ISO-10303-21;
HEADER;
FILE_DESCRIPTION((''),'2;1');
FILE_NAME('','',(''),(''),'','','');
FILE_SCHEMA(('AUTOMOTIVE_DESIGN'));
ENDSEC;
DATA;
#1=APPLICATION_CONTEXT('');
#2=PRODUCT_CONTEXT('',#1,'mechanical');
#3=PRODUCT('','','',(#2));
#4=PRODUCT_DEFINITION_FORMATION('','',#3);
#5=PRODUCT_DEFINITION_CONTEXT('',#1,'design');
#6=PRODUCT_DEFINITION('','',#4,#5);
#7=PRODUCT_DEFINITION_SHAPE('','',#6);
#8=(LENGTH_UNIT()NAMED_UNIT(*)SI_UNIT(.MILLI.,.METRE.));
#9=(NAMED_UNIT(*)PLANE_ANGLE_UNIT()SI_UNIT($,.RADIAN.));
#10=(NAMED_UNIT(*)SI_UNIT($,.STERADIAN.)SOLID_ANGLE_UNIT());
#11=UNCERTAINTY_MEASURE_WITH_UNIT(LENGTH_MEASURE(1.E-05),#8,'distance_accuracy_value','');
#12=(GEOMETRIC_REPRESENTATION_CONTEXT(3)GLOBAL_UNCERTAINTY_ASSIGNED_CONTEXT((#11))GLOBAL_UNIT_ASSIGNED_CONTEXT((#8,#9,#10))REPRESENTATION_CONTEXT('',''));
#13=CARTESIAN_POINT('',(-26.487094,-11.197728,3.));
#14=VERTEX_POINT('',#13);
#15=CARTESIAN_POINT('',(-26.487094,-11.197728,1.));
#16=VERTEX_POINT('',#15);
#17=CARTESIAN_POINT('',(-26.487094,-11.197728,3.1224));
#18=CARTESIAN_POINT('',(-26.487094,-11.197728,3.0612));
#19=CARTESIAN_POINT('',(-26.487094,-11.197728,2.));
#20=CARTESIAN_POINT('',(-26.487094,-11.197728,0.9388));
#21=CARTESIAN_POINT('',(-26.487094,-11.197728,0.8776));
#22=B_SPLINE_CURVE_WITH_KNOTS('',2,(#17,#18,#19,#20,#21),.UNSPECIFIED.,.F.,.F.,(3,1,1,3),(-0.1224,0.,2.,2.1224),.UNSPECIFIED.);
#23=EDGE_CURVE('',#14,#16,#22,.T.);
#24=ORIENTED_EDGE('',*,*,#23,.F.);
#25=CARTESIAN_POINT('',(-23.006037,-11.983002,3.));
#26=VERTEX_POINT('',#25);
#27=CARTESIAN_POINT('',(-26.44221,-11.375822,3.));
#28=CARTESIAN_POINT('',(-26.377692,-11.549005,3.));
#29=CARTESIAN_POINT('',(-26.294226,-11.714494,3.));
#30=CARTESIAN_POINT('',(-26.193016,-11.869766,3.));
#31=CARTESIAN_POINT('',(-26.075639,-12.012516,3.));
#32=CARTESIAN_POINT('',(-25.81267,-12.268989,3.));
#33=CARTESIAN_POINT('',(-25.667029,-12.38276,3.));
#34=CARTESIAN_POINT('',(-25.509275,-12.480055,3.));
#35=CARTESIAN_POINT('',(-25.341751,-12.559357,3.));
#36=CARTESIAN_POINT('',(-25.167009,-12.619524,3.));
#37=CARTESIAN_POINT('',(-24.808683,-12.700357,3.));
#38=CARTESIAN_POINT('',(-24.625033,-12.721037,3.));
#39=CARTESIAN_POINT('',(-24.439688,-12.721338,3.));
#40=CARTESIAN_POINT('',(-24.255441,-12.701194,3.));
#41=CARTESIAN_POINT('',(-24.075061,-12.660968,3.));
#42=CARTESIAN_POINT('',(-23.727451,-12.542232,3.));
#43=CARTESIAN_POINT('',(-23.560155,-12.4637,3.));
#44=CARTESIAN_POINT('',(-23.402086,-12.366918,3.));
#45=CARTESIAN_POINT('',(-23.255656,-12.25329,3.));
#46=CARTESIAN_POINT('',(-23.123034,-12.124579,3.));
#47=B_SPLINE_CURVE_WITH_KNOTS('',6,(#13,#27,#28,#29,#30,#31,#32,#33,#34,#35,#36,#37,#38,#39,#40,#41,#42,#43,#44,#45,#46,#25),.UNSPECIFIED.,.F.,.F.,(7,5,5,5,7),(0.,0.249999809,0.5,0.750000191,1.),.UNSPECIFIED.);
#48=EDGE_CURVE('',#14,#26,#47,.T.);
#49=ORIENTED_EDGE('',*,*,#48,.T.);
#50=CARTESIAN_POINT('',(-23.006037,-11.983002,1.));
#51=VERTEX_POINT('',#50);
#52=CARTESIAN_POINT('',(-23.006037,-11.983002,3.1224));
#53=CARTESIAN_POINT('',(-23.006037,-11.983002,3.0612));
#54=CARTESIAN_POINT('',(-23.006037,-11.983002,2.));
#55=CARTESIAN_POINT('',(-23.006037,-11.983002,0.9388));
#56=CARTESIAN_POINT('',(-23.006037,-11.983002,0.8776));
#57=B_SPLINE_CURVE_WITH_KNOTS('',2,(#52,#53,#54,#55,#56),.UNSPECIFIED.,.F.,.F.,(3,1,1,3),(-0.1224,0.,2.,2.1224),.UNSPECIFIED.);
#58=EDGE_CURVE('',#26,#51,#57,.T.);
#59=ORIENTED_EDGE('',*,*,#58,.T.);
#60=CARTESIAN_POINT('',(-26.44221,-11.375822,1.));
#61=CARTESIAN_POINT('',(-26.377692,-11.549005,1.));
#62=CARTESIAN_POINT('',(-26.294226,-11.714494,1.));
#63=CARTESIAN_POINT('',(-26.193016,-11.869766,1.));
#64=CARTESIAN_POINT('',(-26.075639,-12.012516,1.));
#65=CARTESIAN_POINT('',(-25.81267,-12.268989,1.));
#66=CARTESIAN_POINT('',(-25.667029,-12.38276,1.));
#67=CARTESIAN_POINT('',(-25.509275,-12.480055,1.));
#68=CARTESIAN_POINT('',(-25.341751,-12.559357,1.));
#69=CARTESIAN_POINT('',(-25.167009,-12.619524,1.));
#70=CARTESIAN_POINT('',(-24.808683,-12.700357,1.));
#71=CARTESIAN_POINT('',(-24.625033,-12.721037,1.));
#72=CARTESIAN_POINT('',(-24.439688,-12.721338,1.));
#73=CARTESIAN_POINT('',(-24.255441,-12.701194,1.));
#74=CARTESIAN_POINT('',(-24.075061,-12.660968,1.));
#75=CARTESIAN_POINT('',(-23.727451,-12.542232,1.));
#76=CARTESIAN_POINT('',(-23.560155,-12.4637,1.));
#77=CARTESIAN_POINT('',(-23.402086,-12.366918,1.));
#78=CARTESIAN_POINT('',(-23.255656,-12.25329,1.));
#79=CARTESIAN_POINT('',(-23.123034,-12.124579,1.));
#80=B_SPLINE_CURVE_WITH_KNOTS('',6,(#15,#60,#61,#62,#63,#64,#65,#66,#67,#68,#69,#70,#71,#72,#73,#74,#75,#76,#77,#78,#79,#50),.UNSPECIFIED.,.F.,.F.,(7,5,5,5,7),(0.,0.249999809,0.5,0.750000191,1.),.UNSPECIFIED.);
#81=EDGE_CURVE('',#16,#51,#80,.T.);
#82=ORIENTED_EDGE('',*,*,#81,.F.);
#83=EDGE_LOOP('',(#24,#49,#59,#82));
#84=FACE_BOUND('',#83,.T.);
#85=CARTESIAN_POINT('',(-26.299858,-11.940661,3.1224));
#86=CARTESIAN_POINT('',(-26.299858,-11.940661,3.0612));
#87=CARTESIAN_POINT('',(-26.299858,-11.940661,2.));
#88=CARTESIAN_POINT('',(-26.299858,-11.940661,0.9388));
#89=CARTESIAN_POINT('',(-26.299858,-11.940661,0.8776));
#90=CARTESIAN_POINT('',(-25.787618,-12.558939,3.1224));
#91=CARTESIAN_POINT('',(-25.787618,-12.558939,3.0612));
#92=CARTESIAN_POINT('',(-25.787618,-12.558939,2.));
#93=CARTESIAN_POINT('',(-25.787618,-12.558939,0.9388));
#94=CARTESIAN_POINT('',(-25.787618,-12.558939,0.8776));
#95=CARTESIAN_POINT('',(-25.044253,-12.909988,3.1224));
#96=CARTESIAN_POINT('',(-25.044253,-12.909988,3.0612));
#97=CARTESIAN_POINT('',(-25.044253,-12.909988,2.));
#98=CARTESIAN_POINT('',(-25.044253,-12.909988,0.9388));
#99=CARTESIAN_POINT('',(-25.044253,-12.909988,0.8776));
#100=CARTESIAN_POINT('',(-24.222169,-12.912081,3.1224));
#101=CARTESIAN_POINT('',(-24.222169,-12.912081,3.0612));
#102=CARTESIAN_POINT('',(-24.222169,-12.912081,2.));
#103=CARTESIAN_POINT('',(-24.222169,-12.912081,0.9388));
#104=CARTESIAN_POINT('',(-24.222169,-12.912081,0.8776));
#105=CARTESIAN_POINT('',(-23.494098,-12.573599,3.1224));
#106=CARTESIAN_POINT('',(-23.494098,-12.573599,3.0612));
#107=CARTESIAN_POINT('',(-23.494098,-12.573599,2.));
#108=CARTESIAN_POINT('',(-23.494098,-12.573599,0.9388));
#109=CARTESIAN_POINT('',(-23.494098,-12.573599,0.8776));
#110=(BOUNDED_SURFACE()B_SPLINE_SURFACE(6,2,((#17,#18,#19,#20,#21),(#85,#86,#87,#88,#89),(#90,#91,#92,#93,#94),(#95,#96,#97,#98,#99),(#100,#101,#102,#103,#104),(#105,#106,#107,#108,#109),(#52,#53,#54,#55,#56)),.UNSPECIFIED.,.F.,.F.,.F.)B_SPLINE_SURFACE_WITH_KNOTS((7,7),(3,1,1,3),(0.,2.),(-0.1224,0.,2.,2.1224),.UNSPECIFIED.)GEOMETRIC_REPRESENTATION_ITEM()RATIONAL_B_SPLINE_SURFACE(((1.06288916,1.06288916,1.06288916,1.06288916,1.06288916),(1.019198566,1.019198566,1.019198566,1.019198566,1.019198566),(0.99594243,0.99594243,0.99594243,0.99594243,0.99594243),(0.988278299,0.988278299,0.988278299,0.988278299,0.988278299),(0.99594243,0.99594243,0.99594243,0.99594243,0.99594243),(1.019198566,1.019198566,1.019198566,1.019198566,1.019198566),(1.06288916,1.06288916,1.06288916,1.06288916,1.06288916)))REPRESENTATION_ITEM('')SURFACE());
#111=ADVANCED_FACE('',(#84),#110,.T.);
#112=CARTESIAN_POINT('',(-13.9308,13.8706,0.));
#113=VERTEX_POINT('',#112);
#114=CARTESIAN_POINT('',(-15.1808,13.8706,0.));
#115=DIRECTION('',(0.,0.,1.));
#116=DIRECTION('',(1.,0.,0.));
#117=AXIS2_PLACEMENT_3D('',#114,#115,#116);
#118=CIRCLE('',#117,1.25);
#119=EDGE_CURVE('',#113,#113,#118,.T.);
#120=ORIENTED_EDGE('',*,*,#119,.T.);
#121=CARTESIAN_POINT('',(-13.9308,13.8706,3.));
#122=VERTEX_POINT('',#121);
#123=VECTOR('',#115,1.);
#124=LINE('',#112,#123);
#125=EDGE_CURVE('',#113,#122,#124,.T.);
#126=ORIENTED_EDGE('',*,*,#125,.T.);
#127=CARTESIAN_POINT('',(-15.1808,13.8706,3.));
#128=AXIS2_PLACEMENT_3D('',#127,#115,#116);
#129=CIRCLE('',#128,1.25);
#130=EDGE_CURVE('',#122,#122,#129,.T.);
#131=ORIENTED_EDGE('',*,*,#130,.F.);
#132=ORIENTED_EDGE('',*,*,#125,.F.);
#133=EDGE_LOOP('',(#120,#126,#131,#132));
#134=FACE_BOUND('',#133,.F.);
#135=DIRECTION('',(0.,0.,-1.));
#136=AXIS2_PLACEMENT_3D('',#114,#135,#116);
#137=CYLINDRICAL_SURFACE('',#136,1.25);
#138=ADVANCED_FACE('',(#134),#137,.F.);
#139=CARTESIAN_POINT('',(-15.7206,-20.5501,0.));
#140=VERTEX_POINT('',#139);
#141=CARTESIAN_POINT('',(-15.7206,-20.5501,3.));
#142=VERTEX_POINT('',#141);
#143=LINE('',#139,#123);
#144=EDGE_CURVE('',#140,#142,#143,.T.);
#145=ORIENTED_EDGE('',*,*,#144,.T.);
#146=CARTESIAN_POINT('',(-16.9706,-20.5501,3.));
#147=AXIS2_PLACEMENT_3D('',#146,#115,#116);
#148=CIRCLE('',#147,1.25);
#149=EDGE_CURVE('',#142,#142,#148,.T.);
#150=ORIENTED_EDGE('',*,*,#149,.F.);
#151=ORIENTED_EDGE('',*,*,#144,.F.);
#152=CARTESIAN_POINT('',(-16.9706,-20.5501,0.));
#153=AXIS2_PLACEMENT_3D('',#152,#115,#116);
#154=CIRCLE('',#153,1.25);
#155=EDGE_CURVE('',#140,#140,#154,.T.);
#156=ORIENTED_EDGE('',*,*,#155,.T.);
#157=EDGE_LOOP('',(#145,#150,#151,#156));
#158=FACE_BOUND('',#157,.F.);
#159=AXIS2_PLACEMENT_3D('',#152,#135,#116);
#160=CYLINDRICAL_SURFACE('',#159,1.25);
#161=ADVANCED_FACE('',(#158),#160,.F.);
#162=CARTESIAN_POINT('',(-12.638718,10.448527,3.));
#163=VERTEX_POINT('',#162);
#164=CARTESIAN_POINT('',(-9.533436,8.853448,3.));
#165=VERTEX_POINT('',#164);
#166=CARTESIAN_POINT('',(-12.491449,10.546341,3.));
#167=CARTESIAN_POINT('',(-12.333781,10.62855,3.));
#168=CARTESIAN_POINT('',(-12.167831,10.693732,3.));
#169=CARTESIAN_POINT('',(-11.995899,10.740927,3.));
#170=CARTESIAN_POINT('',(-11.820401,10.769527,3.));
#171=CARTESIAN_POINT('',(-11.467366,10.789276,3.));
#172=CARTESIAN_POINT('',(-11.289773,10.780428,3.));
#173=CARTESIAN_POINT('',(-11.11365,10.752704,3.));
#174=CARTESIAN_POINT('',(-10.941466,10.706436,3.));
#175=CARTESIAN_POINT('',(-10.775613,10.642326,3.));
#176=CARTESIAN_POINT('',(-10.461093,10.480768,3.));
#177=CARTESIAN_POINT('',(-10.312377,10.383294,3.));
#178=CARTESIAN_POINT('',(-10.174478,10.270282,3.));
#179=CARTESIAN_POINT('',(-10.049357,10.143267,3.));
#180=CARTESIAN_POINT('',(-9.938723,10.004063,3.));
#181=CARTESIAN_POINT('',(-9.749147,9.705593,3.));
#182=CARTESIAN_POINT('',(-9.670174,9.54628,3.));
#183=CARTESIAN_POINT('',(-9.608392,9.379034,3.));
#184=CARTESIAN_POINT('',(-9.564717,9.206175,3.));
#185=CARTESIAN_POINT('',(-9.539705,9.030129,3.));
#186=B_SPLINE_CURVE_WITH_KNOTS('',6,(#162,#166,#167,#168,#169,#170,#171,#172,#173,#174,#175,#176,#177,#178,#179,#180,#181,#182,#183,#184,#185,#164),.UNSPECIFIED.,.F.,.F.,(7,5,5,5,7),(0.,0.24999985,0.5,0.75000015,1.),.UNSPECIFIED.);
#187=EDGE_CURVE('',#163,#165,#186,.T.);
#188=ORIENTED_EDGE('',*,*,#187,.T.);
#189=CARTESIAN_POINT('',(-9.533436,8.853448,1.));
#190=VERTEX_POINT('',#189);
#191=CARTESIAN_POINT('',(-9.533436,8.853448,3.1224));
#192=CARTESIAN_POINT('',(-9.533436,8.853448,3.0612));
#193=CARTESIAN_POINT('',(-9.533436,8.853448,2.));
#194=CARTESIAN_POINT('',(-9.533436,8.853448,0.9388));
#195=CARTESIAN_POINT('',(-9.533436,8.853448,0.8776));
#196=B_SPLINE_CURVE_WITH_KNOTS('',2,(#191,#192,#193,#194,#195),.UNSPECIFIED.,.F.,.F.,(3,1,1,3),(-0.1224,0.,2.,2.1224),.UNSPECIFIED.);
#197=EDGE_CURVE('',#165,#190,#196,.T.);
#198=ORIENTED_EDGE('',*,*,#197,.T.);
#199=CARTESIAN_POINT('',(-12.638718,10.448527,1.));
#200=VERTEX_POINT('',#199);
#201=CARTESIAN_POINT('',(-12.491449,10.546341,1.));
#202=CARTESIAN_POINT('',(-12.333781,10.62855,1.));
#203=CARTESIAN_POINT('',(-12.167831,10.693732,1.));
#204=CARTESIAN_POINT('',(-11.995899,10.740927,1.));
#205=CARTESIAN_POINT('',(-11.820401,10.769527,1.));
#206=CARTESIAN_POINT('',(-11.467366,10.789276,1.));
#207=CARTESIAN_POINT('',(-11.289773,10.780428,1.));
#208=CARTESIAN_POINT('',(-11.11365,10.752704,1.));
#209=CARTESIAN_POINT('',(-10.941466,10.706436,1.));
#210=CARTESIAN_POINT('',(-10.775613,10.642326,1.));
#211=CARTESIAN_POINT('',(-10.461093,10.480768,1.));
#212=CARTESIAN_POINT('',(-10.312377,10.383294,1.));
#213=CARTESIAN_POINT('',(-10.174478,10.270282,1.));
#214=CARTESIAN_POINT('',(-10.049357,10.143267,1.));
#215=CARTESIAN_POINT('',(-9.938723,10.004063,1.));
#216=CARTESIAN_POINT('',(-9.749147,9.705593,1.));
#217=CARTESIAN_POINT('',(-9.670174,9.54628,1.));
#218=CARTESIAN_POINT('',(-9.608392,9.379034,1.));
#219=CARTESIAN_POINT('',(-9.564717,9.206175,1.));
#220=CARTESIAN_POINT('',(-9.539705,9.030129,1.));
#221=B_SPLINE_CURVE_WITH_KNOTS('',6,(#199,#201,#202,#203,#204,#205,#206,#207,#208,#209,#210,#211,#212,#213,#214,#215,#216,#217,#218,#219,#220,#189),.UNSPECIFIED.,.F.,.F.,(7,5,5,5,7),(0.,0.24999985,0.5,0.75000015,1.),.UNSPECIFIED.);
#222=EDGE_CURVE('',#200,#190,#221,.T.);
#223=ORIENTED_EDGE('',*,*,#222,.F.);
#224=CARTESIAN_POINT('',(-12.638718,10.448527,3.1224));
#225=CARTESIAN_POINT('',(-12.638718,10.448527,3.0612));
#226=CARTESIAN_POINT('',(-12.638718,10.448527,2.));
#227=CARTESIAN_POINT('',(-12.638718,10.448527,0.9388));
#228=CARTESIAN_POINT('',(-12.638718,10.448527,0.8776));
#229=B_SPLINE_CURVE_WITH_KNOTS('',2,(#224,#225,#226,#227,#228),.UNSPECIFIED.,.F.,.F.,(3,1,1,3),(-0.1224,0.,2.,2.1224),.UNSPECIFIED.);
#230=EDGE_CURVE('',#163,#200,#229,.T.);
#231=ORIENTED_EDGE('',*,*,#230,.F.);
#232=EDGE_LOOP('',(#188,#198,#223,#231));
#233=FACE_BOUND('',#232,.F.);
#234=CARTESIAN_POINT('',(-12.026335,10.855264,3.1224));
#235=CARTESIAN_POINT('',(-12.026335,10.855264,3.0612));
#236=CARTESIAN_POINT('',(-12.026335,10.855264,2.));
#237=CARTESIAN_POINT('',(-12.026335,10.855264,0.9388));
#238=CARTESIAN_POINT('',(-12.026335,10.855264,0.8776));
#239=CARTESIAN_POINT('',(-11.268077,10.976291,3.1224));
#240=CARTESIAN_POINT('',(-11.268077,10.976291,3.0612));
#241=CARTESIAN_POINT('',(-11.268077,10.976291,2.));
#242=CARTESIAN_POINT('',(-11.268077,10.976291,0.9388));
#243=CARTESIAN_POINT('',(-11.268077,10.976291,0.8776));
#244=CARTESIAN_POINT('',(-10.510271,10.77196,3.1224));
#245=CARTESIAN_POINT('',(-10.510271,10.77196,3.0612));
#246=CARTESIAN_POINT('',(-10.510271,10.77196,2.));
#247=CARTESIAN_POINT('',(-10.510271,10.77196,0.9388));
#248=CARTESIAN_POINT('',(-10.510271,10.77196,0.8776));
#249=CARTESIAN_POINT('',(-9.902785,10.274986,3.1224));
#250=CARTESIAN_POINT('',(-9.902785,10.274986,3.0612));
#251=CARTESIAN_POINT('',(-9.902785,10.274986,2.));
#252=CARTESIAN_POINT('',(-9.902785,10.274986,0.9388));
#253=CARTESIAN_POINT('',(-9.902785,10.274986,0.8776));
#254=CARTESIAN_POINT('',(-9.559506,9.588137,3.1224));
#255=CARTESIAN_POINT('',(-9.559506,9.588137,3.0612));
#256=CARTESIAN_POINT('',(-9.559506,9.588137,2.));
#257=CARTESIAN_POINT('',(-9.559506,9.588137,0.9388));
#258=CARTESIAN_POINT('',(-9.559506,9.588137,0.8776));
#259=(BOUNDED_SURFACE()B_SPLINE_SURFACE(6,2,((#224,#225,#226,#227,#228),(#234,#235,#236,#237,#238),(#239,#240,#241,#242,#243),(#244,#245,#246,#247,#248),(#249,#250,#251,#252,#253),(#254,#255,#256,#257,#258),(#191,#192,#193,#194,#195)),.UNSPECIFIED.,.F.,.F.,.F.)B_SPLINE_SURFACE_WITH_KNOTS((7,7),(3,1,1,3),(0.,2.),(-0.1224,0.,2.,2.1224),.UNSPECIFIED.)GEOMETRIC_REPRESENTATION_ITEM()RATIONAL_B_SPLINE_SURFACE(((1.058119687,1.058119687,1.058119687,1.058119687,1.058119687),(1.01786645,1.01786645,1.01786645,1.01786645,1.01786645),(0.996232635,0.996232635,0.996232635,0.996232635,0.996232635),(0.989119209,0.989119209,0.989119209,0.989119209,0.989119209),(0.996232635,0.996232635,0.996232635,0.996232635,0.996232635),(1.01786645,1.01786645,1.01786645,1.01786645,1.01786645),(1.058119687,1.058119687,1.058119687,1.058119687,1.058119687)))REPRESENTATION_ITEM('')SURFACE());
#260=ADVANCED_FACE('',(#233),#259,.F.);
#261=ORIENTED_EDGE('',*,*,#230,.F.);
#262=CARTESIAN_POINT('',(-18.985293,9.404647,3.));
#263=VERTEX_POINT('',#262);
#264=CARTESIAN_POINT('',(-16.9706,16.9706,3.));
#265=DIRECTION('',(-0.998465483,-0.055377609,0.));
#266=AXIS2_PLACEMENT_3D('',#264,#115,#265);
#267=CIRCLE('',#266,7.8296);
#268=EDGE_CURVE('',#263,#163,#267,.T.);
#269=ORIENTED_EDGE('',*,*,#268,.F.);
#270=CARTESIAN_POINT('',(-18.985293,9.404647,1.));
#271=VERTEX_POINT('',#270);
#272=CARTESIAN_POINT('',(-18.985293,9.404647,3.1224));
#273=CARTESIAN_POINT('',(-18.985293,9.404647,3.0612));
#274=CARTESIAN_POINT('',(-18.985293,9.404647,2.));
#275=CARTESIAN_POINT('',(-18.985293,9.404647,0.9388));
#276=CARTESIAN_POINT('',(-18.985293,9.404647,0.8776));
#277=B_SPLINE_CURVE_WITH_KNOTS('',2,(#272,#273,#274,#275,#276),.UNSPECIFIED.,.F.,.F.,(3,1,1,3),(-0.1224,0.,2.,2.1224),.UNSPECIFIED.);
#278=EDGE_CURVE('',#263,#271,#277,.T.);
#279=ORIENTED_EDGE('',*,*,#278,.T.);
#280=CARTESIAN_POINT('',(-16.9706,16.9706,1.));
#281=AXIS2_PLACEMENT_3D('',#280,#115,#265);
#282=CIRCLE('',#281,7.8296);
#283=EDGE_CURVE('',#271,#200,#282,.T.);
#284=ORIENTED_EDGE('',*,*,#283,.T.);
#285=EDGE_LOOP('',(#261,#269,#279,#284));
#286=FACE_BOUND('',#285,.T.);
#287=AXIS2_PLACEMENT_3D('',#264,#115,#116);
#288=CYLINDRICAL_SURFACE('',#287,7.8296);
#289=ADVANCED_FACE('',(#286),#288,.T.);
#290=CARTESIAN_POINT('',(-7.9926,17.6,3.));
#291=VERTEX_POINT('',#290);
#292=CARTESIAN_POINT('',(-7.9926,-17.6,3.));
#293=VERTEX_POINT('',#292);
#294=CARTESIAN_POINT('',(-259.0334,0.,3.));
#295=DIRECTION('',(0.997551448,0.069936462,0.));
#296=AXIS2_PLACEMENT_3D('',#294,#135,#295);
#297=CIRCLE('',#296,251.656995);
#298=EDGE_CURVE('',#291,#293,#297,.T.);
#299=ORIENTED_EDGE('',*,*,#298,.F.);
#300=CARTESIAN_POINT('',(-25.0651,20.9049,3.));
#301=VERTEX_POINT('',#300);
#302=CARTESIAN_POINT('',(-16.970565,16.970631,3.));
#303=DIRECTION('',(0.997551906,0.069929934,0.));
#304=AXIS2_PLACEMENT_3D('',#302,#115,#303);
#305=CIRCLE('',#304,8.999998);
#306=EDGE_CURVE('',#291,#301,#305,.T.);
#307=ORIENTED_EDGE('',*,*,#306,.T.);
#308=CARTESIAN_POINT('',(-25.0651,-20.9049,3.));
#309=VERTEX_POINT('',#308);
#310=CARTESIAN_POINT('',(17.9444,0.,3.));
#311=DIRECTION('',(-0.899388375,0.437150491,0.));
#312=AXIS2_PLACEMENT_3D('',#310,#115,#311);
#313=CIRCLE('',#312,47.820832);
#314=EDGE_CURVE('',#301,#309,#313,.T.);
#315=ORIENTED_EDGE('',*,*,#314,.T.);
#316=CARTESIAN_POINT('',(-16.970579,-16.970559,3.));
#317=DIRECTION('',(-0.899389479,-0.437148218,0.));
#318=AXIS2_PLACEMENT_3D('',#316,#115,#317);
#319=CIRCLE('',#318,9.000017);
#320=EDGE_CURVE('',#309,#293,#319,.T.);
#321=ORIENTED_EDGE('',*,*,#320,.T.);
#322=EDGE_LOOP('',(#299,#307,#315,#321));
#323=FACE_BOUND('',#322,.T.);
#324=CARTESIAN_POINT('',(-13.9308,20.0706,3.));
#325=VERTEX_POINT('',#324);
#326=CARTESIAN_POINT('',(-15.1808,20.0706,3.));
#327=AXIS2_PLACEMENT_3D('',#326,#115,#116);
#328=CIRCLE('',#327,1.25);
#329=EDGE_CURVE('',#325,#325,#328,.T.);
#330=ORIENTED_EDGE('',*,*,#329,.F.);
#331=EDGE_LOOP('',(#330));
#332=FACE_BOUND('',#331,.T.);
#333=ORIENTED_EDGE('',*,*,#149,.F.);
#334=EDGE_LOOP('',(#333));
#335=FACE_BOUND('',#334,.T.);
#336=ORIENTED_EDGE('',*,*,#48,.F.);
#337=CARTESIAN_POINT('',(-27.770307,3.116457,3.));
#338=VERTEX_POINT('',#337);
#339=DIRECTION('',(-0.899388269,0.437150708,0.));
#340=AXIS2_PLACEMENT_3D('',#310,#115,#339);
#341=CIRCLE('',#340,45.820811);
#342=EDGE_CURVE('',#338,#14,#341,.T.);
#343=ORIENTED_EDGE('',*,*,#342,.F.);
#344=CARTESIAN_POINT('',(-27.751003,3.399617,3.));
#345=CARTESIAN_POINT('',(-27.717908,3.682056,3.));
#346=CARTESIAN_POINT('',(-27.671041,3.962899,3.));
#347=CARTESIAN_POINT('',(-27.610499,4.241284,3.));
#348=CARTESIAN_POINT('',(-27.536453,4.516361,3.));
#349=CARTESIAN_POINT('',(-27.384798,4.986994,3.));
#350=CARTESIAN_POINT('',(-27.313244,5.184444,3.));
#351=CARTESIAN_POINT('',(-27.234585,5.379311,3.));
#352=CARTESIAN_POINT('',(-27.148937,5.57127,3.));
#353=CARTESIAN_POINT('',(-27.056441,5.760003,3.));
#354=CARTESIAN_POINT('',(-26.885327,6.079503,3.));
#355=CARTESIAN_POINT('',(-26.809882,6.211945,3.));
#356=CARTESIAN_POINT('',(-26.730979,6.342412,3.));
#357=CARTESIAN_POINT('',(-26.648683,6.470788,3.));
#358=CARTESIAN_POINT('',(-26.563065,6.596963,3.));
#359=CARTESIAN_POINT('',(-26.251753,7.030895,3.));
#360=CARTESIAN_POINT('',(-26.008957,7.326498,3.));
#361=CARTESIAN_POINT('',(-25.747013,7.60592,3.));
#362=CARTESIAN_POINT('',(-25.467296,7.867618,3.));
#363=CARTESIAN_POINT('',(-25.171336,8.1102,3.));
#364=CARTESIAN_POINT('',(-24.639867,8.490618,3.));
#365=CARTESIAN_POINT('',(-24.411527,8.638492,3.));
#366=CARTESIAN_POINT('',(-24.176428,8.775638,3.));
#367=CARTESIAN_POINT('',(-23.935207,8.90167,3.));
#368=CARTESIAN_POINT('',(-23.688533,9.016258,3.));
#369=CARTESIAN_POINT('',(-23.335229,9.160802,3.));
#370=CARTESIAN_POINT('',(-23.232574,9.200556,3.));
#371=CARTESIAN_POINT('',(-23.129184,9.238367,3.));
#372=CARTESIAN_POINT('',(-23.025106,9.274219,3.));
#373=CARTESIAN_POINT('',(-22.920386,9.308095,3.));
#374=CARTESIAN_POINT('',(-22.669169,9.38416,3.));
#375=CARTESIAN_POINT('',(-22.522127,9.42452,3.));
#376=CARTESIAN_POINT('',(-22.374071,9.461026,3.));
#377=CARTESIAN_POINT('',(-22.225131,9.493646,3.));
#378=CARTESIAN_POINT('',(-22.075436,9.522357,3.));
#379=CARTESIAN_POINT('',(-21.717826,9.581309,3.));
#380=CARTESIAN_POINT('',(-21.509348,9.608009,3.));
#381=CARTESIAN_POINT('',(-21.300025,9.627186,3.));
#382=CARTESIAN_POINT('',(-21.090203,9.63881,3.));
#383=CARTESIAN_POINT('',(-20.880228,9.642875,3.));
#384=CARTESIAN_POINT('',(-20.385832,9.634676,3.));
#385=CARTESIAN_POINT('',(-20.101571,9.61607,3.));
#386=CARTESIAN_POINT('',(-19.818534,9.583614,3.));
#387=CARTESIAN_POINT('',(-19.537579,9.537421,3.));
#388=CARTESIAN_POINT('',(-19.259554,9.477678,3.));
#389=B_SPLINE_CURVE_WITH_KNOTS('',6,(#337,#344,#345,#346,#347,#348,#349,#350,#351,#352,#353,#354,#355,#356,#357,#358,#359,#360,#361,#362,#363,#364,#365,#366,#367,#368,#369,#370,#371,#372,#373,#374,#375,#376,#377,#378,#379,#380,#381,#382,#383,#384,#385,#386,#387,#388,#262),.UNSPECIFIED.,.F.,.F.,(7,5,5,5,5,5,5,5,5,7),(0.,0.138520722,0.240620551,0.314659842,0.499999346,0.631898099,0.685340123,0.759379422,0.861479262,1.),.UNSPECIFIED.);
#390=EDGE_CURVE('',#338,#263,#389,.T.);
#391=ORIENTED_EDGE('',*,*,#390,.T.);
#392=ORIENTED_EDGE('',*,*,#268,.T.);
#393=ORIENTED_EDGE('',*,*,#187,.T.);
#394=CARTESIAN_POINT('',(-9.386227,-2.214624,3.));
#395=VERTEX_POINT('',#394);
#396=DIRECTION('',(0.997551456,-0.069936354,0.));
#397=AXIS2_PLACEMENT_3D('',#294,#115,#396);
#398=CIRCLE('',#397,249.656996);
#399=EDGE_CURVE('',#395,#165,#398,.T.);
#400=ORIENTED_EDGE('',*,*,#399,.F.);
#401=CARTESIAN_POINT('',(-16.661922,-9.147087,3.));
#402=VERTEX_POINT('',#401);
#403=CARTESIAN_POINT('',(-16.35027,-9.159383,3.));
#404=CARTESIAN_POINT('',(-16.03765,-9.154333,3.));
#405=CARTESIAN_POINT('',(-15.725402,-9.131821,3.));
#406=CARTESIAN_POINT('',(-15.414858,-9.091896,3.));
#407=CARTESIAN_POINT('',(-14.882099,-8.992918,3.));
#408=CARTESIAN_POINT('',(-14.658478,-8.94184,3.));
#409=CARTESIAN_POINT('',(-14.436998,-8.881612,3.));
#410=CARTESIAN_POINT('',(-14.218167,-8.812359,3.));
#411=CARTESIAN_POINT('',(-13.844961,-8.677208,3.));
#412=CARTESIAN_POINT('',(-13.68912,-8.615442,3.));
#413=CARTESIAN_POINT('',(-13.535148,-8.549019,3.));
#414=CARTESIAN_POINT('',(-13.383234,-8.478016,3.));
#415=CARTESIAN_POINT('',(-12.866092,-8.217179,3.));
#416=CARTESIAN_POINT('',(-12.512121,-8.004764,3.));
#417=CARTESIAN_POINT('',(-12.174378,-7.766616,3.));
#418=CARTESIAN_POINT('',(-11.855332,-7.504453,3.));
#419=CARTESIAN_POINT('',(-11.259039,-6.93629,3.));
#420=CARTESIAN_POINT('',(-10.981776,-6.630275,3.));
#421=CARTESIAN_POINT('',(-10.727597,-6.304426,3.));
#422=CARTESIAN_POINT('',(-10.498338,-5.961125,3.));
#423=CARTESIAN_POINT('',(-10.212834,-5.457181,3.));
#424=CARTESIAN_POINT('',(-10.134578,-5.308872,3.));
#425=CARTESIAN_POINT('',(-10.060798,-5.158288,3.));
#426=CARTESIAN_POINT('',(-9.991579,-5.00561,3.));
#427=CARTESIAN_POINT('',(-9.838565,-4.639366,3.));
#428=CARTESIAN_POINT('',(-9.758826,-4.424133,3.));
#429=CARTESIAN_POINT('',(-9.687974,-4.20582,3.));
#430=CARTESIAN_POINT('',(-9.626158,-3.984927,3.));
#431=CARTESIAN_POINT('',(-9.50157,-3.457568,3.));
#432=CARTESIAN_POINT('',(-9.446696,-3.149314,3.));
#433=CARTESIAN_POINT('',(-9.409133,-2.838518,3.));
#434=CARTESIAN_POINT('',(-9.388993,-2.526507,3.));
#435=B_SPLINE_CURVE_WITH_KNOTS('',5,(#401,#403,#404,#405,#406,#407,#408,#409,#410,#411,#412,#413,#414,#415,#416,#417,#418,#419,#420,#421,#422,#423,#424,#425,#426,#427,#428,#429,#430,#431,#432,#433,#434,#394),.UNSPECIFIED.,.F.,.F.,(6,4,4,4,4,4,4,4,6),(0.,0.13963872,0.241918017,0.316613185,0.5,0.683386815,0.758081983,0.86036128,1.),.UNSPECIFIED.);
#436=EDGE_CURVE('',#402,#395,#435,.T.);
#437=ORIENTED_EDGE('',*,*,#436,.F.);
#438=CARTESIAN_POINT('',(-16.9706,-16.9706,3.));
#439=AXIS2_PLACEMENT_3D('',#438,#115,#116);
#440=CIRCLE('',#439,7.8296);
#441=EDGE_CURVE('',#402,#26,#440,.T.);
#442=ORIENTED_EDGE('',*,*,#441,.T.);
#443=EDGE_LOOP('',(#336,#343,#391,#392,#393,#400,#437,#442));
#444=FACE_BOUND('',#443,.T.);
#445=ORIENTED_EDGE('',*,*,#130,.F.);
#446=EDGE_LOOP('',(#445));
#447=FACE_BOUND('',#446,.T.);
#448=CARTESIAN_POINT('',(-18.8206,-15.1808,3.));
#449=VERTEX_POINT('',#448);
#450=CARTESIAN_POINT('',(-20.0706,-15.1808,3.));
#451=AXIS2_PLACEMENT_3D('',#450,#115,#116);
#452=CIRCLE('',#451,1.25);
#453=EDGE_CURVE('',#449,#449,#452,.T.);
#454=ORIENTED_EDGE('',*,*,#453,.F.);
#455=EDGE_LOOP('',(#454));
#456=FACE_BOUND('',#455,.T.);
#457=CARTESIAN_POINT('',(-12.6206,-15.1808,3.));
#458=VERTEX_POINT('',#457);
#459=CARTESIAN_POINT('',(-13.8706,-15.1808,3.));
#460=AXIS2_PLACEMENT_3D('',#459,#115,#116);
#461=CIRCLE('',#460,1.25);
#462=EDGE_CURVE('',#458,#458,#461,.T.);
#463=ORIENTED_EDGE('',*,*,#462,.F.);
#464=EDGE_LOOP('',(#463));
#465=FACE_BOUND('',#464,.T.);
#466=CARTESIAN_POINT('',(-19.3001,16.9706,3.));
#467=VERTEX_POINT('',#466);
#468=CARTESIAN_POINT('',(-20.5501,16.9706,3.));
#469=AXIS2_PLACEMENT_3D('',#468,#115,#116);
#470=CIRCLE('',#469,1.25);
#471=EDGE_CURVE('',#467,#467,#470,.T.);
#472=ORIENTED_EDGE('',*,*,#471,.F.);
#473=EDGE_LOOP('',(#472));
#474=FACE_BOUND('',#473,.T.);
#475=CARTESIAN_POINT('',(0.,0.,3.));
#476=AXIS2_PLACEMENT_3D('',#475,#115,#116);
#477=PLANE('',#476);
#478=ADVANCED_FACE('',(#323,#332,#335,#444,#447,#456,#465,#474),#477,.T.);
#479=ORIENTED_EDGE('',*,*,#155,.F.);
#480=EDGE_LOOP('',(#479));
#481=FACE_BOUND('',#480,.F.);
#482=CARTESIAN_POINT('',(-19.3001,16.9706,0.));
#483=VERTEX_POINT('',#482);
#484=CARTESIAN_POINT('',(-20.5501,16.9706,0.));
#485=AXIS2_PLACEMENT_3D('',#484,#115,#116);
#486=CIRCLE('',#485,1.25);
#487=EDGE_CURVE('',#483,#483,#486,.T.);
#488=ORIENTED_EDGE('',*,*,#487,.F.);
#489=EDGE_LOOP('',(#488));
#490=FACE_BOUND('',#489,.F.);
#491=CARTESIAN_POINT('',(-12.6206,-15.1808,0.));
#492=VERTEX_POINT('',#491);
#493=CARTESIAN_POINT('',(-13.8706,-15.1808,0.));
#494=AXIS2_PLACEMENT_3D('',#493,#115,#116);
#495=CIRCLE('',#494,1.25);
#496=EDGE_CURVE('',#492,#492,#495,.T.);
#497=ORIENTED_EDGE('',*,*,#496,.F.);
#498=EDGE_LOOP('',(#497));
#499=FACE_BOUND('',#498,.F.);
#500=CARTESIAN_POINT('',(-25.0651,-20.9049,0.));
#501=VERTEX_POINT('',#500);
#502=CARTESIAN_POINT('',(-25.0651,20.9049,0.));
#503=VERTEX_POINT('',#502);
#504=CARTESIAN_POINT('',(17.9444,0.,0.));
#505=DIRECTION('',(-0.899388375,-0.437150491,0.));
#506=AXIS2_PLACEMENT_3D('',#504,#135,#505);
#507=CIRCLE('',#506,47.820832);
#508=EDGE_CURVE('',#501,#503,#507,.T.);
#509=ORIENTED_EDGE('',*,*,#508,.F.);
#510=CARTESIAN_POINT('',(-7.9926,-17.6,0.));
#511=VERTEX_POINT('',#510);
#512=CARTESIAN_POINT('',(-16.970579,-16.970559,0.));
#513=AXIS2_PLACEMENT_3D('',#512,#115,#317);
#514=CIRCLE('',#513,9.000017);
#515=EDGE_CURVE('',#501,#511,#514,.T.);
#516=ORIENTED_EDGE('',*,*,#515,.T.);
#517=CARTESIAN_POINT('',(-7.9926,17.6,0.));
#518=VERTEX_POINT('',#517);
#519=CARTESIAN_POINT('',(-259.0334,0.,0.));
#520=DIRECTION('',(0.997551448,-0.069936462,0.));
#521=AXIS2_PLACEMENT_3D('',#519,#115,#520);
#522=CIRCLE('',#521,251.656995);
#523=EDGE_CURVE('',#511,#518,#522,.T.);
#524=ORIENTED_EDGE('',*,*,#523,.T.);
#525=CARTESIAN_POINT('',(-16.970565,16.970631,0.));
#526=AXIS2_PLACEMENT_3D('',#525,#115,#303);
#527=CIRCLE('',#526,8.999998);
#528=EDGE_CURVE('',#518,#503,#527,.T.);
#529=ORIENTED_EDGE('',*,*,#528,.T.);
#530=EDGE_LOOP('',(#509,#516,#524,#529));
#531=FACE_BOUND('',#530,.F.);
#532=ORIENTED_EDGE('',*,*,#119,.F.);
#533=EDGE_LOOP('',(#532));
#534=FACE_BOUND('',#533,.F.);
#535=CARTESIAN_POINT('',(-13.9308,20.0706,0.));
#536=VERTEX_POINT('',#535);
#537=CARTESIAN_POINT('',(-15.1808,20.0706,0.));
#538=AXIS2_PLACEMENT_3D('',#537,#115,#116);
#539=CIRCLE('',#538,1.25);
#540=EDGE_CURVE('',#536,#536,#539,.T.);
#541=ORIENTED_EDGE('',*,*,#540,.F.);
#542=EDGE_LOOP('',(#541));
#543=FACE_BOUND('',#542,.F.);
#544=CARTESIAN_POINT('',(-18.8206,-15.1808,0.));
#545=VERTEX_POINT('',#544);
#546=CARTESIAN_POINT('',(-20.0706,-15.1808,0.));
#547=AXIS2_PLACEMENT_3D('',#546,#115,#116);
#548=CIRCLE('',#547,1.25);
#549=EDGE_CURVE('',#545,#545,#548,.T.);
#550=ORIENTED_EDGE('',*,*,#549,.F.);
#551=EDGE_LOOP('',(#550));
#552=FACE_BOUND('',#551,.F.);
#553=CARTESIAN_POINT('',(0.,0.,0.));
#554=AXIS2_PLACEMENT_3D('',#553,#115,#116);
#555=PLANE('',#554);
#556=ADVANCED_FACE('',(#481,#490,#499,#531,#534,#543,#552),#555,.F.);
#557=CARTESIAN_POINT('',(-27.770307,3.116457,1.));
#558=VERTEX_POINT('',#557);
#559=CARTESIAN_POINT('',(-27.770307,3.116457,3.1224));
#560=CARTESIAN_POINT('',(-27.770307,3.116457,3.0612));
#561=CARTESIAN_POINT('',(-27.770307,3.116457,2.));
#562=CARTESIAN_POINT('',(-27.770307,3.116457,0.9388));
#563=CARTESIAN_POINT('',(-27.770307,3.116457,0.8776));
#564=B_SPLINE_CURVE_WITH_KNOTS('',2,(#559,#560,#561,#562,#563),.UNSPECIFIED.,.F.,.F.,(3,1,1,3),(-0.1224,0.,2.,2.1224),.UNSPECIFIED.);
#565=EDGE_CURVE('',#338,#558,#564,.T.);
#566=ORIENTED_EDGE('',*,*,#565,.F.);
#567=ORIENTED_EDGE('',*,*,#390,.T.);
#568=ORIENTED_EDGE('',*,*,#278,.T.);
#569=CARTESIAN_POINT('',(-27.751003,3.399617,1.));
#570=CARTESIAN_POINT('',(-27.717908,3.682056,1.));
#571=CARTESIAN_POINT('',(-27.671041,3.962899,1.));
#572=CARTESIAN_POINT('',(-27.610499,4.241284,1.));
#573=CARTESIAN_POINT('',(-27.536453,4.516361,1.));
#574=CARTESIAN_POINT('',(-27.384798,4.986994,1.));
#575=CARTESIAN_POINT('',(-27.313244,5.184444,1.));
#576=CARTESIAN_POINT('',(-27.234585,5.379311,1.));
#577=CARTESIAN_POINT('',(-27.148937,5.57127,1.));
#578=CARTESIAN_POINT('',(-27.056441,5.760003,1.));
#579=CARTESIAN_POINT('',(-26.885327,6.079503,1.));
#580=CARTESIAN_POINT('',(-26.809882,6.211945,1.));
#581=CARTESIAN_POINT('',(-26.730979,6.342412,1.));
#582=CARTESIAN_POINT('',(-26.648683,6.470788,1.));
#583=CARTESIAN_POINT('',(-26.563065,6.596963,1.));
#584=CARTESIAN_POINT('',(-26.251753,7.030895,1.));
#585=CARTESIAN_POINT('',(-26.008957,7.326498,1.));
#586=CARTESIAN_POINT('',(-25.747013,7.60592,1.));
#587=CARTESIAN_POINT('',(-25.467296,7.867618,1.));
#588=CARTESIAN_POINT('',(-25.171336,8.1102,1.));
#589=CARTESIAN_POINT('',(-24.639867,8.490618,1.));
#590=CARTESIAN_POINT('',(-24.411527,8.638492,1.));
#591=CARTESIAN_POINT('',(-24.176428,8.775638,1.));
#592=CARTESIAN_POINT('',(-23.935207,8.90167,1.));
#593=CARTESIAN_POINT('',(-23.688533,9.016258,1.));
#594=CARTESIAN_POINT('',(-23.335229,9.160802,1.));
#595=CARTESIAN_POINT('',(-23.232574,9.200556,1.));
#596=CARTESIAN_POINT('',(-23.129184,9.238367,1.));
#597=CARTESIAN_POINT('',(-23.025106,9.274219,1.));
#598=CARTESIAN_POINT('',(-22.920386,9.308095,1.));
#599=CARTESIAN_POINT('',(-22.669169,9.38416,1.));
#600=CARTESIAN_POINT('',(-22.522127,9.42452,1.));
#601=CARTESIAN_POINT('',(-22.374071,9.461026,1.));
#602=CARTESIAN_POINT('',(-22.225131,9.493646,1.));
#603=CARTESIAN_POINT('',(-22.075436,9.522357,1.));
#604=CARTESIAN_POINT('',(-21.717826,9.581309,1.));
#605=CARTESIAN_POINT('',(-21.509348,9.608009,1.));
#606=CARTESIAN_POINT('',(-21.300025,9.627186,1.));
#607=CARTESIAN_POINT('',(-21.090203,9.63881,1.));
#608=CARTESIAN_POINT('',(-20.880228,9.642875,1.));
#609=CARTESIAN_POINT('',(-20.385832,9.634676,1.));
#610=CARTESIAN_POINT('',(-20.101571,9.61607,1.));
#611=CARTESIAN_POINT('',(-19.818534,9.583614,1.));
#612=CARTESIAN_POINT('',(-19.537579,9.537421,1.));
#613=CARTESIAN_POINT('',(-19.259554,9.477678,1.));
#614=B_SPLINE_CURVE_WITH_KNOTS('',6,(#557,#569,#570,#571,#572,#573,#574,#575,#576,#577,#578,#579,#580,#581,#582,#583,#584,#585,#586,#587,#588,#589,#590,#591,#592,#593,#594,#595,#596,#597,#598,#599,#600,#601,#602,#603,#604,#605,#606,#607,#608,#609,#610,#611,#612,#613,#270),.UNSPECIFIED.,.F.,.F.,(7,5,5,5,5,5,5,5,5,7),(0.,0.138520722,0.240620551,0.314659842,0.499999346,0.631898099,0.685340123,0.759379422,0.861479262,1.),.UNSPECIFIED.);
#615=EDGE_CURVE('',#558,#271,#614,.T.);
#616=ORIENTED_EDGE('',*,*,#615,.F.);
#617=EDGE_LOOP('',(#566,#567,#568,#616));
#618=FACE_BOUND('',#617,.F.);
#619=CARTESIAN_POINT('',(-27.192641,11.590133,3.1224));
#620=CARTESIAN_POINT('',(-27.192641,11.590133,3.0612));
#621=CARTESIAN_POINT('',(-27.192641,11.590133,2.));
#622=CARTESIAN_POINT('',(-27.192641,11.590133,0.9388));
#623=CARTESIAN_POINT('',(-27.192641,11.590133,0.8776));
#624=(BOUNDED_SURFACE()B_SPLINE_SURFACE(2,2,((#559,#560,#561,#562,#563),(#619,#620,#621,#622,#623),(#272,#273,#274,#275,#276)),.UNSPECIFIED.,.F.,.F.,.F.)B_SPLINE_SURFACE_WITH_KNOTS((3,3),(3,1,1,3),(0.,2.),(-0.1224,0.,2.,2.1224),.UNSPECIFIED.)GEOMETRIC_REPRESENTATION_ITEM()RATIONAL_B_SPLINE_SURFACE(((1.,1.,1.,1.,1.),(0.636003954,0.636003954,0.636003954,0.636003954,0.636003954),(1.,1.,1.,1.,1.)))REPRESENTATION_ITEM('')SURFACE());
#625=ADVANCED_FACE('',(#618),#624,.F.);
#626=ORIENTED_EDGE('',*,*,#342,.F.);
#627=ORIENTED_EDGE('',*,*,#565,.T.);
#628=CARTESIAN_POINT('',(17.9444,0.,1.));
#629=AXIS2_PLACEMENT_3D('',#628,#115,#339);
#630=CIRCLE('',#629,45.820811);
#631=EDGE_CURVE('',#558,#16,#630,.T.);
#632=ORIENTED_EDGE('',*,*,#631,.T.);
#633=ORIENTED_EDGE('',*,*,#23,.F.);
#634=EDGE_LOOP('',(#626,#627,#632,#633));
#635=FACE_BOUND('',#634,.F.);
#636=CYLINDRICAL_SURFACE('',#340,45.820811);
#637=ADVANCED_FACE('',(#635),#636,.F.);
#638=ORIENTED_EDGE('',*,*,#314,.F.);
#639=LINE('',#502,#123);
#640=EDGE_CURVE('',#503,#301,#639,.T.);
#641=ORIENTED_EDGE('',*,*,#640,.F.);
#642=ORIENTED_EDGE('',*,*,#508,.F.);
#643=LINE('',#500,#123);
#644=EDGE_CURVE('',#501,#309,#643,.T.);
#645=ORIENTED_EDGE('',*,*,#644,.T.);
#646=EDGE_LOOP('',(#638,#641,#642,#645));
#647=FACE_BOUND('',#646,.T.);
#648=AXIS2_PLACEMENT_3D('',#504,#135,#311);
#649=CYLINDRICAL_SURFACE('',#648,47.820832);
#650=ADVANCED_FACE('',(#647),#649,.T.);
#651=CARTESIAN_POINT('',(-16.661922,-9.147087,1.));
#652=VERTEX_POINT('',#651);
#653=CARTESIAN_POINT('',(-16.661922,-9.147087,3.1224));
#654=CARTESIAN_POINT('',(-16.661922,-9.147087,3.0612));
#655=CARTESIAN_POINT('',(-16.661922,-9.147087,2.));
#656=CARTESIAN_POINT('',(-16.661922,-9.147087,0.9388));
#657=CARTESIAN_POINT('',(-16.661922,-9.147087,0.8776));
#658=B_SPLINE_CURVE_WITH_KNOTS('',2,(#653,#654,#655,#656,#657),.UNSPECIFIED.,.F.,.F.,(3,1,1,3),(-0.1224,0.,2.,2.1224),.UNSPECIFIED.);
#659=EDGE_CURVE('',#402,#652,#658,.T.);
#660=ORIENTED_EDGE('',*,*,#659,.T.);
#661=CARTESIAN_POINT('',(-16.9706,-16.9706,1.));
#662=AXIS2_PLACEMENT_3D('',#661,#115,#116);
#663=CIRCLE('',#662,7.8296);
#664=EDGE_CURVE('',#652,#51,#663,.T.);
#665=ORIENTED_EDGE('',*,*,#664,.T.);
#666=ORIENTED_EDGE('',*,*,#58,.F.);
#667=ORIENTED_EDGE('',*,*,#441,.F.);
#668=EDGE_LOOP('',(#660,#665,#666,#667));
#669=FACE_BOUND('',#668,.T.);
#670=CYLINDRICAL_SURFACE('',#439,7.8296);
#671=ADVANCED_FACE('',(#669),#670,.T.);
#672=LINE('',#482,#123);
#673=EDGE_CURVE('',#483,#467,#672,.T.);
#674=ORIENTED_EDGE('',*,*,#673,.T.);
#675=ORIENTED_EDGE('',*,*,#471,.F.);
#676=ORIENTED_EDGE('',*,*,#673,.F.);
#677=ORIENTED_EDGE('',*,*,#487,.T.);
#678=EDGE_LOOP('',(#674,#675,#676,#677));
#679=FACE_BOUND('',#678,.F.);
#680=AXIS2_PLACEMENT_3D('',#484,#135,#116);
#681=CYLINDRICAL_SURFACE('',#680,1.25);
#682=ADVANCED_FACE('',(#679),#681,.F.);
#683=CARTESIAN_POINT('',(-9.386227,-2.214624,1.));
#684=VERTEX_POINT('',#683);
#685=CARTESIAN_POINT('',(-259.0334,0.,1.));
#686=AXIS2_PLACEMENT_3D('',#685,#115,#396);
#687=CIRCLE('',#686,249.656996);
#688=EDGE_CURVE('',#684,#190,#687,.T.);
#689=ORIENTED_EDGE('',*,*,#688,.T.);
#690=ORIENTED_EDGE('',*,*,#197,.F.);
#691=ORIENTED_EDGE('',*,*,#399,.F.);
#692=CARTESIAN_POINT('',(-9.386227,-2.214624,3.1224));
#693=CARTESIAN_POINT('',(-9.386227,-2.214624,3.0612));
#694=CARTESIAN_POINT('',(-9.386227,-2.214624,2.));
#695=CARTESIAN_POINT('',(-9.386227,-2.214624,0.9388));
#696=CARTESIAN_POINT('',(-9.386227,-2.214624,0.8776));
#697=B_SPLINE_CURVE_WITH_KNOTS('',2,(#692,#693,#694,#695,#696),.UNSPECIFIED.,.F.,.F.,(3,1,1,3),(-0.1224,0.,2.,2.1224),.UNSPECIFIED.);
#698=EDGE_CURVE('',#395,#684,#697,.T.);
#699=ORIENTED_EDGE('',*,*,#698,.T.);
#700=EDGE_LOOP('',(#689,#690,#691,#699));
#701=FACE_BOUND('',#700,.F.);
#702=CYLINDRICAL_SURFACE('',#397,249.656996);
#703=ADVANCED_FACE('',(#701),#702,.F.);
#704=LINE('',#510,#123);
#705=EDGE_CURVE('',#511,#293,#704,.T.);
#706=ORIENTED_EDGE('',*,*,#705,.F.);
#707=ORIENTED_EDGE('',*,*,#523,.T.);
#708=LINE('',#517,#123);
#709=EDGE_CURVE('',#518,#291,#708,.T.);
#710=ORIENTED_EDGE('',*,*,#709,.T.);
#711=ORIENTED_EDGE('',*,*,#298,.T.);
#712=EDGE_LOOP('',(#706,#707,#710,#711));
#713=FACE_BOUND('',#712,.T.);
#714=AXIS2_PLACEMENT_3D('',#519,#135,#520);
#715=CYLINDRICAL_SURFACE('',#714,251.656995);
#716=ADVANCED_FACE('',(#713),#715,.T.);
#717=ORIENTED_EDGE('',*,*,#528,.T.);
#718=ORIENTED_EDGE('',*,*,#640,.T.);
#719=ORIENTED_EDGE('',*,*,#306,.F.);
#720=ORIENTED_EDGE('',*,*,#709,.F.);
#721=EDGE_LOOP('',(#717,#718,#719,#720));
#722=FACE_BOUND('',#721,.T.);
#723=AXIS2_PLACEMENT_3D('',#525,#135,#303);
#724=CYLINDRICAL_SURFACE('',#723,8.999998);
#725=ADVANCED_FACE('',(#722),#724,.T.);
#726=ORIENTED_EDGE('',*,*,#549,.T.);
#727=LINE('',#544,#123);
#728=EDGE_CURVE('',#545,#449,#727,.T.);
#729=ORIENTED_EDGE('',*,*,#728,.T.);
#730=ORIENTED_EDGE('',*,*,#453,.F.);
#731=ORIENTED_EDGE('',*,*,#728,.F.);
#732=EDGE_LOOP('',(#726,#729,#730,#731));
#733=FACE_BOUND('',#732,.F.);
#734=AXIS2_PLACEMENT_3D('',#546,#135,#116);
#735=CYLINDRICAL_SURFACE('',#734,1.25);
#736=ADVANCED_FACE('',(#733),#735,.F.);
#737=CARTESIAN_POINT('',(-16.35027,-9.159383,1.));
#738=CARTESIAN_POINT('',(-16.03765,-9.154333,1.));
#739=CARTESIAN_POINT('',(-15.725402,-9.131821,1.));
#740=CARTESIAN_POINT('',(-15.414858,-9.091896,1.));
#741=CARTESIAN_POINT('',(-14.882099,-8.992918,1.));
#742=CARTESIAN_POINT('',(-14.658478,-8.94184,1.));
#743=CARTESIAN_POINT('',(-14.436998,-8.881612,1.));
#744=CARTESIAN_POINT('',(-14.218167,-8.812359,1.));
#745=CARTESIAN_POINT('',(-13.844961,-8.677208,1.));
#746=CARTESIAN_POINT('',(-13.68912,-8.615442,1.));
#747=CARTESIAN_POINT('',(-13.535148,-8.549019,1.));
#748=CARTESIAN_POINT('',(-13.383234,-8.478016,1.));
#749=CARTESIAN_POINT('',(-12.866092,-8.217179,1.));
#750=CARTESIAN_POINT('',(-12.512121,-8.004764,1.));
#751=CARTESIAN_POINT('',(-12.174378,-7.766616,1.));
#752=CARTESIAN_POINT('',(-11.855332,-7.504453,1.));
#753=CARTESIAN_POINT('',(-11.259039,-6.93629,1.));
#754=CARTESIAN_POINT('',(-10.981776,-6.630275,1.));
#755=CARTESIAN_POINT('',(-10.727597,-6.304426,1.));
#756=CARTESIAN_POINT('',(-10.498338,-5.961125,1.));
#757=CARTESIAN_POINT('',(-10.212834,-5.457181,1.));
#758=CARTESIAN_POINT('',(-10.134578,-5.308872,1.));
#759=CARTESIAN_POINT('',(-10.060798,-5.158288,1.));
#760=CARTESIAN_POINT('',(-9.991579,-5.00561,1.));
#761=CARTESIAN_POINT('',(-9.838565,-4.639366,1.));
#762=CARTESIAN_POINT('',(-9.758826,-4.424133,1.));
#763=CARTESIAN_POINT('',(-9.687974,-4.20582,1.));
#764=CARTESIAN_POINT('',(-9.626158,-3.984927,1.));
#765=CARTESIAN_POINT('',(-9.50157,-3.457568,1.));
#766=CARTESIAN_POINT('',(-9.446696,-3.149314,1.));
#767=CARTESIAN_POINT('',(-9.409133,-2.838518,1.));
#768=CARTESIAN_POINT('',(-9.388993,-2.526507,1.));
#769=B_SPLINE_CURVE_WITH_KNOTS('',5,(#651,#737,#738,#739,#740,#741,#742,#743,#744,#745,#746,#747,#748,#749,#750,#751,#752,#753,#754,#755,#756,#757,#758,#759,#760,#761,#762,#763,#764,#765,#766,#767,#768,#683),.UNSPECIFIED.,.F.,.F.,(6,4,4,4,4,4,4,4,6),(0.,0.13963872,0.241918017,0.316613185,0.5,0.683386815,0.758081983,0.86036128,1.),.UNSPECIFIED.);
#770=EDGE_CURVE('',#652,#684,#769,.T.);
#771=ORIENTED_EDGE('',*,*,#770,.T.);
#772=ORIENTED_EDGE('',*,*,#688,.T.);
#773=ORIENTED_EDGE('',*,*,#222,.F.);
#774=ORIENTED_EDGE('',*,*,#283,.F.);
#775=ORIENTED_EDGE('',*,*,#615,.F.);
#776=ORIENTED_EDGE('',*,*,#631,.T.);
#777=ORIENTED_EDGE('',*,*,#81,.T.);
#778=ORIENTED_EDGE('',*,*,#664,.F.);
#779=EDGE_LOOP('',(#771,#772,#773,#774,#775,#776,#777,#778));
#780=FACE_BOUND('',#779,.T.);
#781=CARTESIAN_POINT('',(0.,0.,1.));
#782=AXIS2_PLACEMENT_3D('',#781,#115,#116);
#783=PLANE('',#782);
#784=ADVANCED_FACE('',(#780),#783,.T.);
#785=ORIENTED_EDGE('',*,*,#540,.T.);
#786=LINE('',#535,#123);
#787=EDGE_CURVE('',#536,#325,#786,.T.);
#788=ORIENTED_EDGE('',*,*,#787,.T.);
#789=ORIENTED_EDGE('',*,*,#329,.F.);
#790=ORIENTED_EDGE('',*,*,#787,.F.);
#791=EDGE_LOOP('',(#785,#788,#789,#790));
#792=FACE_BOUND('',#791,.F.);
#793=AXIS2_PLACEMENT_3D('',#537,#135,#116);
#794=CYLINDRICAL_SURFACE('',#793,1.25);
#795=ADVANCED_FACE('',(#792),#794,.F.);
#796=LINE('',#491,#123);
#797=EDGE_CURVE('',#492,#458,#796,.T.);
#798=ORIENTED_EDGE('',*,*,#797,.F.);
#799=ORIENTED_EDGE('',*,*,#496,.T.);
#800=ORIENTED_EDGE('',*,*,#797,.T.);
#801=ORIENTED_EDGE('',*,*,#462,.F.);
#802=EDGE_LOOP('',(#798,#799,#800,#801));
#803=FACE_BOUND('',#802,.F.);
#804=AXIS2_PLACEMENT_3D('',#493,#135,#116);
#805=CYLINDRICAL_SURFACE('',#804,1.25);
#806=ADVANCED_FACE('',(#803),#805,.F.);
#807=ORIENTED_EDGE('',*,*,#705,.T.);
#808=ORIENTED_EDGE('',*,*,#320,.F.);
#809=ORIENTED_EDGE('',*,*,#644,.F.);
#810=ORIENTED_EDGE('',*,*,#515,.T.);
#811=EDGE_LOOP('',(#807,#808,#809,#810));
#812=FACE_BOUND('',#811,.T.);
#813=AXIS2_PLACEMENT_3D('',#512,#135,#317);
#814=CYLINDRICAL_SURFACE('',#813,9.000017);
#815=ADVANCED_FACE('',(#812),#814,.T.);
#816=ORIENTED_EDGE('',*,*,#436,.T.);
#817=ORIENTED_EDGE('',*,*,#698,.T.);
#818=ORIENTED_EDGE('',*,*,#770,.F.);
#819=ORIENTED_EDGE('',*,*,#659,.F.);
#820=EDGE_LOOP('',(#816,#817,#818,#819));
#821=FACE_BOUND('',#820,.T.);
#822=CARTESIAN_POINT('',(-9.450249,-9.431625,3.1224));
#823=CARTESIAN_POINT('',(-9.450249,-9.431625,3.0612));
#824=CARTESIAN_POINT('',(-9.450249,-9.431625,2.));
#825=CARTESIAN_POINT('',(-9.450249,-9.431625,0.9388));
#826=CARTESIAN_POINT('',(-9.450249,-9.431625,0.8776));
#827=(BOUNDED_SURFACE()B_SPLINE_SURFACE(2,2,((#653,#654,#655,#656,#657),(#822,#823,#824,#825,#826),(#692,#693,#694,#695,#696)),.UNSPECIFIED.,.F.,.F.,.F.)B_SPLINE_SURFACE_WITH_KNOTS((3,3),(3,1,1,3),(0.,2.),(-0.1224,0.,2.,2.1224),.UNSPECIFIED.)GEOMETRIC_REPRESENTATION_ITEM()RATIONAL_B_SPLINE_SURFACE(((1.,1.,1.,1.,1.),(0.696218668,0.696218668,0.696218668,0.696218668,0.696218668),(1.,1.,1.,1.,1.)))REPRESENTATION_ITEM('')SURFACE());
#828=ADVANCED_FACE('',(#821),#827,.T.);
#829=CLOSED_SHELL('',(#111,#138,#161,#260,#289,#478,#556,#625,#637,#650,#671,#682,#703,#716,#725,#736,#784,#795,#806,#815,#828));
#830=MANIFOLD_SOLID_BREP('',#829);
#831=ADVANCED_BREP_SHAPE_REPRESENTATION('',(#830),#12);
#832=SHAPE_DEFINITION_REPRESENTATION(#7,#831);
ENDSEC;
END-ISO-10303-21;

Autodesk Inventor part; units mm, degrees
ref_plane "YZ Plane" through (0, 0, 0) normal (1, 0, 0) x (0, 1, 0)
ref_plane "XZ Plane" through (0, 0, 0) normal (0, 1, 0) x (-1, 0, 0)
ref_plane "XY Plane" through (0, 0, 0) normal (0, 0, 1) x (1, 0, 0)
sketch "Sketch1" plane through (0, 0, 0) normal (0, 0, 1) x (1, 0, 0)
  line L0 (-15.8764, 0) -> (-29.8764, 0)
  line L1 (-15.8764, 0) -> (-7.3764, 0)
  line L2 (-25.9706, 16.9706) -> (-25.9706, -16.9706) construction
  line L3 (-7.9706, -16.9706) -> (-7.9706, 16.9706) construction
  arc A0 (-7.9706, 16.9706) -> (-7.9926, 17.6) centre (-16.9706, 16.9706) ccw construction
  arc A1 (-25.9706, -16.9706) -> (-25.0651, -20.9049) centre (-16.9706, -16.9706) ccw construction
  arc A2 (-25.0651, 20.9049) -> (-25.0651, -20.9049) centre (17.9444, 0) ccw
  arc A3 (-7.9926, -17.6) -> (-7.9926, 17.6) centre (-259.0334, 0) ccw
  arc A4 (-25.0651, 20.9049) -> (-25.9706, 16.9706) centre (-16.9706, 16.9706) ccw construction
  arc A5 (-25.0651, -20.9049) -> (-7.9926, -17.6) centre (-16.9706, -16.9706) ccw
  arc A6 (-7.9926, 17.6) -> (-25.0651, 20.9049) centre (-16.9706, 16.9706) ccw
  arc A7 (-7.9926, -17.6) -> (-7.9706, -16.9706) centre (-16.9706, -16.9706) ccw construction
  line L4 (-16.9706, -20.5501) -> (-20.0706, -15.1808) construction
  line L5 (-20.0706, -15.1808) -> (-13.8706, -15.1808) construction
  line L6 (-13.8706, -15.1808) -> (-16.9706, -20.5501) construction
  circle A8 centre (-20.0706, -15.1808) radius 1.25
  circle A9 centre (-13.8706, -15.1808) radius 1.25
  circle A10 centre (-16.9706, -20.5501) radius 1.25
  line L7 (0, 0) -> (-43.2466, 0) construction
  line L8 (-15.1808, 20.0706) -> (-15.1808, 13.8706) construction
  line L9 (-15.1808, 13.8706) -> (-20.5501, 16.9706) construction
  line L10 (-20.5501, 16.9706) -> (-15.1808, 20.0706) construction
  circle A11 centre (-15.1808, 13.8706) radius 1.25
  circle A12 centre (-20.5501, 16.9706) radius 1.25
  circle A13 centre (-15.1808, 20.0706) radius 1.25
  line L11 (-16.9706, 16.9706) -> (0, 0) construction
  line L12 (-16.9706, -16.9706) -> (0, 0) construction
  point P0 (-29.8764, 0)
  point P1 (-7.3764, 0)
  dimension "d11" = 9
  dimension "d14" = 2.5
  dimension "d15" = 2.5
  dimension "d16" = 2.5
  dimension "d17" = 6.2
  dimension "d19" = 2.5
  dimension "d20" = 2.5
  dimension "d21" = 2.5
  dimension "d22" = 6.2
  dimension "d23" = 24
  dimension "d24" = 45
  dimension "d25" = 24
  dimension "d26" = 45
  dimension "d27" = 14
  dimension "d28" = 8.5
extrude "Extrusion1" add sketch "Sketch1" along normal blind 3
sketch "Sketch2" plane through (0, 0, 3) normal (0, 0, 1) x (1, 0, 0)
  arc A0 (-25.0651, 20.9049) -> (-25.0651, -20.9049) centre (17.9444, 0) ccw projected
  arc A1 (-25.0651, -20.9049) -> (-7.9926, -17.6) centre (-16.9706, -16.9706) ccw projected
  arc A2 (-7.9926, -17.6) -> (-7.9926, 17.6) centre (-259.0334, 0) ccw projected
  arc A3 (-7.9926, 17.6) -> (-25.0651, 20.9049) centre (-16.9706, 16.9706) ccw projected
  circle A4 centre (-16.9706, -20.5501) radius 1.25 projected
  circle A5 centre (-13.8706, -15.1808) radius 1.25 projected
  circle A6 centre (-20.0706, -15.1808) radius 1.25 projected
  circle A7 centre (-15.1808, 13.8706) radius 1.25 projected
  circle A8 centre (-15.1808, 20.0706) radius 1.25 projected
  circle A9 centre (-20.5501, 16.9706) radius 1.25 projected
  arc A10 (-23.2663, 20.0306) -> (-23.2663, -20.0306) centre (17.9444, 0) ccw
  arc A11 (-9.9877, 17.4601) -> (-23.2663, 20.0306) centre (-16.9706, 16.9706) ccw
  arc A12 (-9.9877, -17.4601) -> (-9.9877, 17.4601) centre (-259.0334, 0) ccw
  arc A13 (-23.2663, -20.0306) -> (-9.9877, -17.4601) centre (-16.9706, -16.9706) ccw
  circle A14 centre (-15.1808, 13.8706) radius 4.25
  circle A15 centre (-16.9706, 16.9706) radius 7.8296
  circle A16 centre (-16.9706, -16.9706) radius 7.8296
  line L0 (-9.7642, 13.9095) -> (10.6825, 13.9095)
  point P0 (0, 0)
  point P1 (-24.7881, -16.5371)
  point P2 (-9.7642, -13.9095)
  point P3 (-24.7881, 16.5371)
  dimension "d33" = 15.6591
  dimension "d31" = 2
  dimension "d32" = 3
  dimension "d34" = 15.6591
extrude "Extrusion2" cut sketch "Sketch2" against normal blind 2 contours A15 A12 A16 A10
fillet "Fillet1" radius 7 2 edges at (-24.7881, 16.5371, 2) (-9.7642, -13.9095, 2)
fillet "Fillet2" radius 2 2 edges at (-9.7642, 13.9095, 2) (-24.7881, -16.5371, 2)
sketch "Sketch3" plane through (0, 0, 3) normal (0, 0, 1) x (1, 0, 0)
  arc A0 (-18.9853, 9.4046) -> (-12.6387, 10.4485) centre (-16.9706, 16.9706) ccw projected
  arc A1 (-9.5334, 8.8534) -> (-12.6387, 10.4485) centre (-11.5322, 8.7825) ccw projected
  arc A2 (-9.3862, -2.2146) -> (-9.5334, 8.8534) centre (-259.0334, 0) ccw projected
  arc A3 (-16.6619, -9.1471) -> (-9.3862, -2.2146) centre (-16.386, -2.1525) ccw projected
  arc A4 (-16.6619, -9.1471) -> (-23.006, -11.983) centre (-16.9706, -16.9706) ccw projected
  arc A5 (-26.4871, -11.1978) -> (-23.006, -11.983) centre (-24.5477, -10.709) ccw projected
  arc A6 (-27.7703, 3.1165) -> (-26.4871, -11.1978) centre (17.9444, 0) ccw projected
  arc A7 (-18.9853, 9.4046) -> (-27.7703, 3.1165) centre (-20.7865, 2.6404) ccw projected
  arc A8 (-25.0651, 20.9049) -> (-25.0651, -20.9049) centre (17.9444, 0) ccw projected
  arc A9 (-25.0651, -20.9049) -> (-7.9926, -17.6) centre (-16.9706, -16.9706) ccw projected
  arc A10 (-7.9926, -17.6) -> (-7.9926, 17.6) centre (-259.0334, 0) ccw projected
  arc A11 (-7.9926, 17.6) -> (-25.0651, 20.9049) centre (-16.9706, 16.9706) ccw projected
  circle A12 centre (-16.9706, -20.5501) radius 1.25 projected
  circle A13 centre (-13.8706, -15.1808) radius 1.25 projected
  circle A14 centre (-20.0706, -15.1808) radius 1.25 projected
  circle A15 centre (-15.1808, 13.8706) radius 1.25 projected
  circle A16 centre (-15.1808, 20.0706) radius 1.25 projected
  circle A17 centre (-20.5501, 16.9706) radius 1.25 projected
  point P0 (0, 0)
equation "\"d34\" = d33"
properties part number "クランク"
